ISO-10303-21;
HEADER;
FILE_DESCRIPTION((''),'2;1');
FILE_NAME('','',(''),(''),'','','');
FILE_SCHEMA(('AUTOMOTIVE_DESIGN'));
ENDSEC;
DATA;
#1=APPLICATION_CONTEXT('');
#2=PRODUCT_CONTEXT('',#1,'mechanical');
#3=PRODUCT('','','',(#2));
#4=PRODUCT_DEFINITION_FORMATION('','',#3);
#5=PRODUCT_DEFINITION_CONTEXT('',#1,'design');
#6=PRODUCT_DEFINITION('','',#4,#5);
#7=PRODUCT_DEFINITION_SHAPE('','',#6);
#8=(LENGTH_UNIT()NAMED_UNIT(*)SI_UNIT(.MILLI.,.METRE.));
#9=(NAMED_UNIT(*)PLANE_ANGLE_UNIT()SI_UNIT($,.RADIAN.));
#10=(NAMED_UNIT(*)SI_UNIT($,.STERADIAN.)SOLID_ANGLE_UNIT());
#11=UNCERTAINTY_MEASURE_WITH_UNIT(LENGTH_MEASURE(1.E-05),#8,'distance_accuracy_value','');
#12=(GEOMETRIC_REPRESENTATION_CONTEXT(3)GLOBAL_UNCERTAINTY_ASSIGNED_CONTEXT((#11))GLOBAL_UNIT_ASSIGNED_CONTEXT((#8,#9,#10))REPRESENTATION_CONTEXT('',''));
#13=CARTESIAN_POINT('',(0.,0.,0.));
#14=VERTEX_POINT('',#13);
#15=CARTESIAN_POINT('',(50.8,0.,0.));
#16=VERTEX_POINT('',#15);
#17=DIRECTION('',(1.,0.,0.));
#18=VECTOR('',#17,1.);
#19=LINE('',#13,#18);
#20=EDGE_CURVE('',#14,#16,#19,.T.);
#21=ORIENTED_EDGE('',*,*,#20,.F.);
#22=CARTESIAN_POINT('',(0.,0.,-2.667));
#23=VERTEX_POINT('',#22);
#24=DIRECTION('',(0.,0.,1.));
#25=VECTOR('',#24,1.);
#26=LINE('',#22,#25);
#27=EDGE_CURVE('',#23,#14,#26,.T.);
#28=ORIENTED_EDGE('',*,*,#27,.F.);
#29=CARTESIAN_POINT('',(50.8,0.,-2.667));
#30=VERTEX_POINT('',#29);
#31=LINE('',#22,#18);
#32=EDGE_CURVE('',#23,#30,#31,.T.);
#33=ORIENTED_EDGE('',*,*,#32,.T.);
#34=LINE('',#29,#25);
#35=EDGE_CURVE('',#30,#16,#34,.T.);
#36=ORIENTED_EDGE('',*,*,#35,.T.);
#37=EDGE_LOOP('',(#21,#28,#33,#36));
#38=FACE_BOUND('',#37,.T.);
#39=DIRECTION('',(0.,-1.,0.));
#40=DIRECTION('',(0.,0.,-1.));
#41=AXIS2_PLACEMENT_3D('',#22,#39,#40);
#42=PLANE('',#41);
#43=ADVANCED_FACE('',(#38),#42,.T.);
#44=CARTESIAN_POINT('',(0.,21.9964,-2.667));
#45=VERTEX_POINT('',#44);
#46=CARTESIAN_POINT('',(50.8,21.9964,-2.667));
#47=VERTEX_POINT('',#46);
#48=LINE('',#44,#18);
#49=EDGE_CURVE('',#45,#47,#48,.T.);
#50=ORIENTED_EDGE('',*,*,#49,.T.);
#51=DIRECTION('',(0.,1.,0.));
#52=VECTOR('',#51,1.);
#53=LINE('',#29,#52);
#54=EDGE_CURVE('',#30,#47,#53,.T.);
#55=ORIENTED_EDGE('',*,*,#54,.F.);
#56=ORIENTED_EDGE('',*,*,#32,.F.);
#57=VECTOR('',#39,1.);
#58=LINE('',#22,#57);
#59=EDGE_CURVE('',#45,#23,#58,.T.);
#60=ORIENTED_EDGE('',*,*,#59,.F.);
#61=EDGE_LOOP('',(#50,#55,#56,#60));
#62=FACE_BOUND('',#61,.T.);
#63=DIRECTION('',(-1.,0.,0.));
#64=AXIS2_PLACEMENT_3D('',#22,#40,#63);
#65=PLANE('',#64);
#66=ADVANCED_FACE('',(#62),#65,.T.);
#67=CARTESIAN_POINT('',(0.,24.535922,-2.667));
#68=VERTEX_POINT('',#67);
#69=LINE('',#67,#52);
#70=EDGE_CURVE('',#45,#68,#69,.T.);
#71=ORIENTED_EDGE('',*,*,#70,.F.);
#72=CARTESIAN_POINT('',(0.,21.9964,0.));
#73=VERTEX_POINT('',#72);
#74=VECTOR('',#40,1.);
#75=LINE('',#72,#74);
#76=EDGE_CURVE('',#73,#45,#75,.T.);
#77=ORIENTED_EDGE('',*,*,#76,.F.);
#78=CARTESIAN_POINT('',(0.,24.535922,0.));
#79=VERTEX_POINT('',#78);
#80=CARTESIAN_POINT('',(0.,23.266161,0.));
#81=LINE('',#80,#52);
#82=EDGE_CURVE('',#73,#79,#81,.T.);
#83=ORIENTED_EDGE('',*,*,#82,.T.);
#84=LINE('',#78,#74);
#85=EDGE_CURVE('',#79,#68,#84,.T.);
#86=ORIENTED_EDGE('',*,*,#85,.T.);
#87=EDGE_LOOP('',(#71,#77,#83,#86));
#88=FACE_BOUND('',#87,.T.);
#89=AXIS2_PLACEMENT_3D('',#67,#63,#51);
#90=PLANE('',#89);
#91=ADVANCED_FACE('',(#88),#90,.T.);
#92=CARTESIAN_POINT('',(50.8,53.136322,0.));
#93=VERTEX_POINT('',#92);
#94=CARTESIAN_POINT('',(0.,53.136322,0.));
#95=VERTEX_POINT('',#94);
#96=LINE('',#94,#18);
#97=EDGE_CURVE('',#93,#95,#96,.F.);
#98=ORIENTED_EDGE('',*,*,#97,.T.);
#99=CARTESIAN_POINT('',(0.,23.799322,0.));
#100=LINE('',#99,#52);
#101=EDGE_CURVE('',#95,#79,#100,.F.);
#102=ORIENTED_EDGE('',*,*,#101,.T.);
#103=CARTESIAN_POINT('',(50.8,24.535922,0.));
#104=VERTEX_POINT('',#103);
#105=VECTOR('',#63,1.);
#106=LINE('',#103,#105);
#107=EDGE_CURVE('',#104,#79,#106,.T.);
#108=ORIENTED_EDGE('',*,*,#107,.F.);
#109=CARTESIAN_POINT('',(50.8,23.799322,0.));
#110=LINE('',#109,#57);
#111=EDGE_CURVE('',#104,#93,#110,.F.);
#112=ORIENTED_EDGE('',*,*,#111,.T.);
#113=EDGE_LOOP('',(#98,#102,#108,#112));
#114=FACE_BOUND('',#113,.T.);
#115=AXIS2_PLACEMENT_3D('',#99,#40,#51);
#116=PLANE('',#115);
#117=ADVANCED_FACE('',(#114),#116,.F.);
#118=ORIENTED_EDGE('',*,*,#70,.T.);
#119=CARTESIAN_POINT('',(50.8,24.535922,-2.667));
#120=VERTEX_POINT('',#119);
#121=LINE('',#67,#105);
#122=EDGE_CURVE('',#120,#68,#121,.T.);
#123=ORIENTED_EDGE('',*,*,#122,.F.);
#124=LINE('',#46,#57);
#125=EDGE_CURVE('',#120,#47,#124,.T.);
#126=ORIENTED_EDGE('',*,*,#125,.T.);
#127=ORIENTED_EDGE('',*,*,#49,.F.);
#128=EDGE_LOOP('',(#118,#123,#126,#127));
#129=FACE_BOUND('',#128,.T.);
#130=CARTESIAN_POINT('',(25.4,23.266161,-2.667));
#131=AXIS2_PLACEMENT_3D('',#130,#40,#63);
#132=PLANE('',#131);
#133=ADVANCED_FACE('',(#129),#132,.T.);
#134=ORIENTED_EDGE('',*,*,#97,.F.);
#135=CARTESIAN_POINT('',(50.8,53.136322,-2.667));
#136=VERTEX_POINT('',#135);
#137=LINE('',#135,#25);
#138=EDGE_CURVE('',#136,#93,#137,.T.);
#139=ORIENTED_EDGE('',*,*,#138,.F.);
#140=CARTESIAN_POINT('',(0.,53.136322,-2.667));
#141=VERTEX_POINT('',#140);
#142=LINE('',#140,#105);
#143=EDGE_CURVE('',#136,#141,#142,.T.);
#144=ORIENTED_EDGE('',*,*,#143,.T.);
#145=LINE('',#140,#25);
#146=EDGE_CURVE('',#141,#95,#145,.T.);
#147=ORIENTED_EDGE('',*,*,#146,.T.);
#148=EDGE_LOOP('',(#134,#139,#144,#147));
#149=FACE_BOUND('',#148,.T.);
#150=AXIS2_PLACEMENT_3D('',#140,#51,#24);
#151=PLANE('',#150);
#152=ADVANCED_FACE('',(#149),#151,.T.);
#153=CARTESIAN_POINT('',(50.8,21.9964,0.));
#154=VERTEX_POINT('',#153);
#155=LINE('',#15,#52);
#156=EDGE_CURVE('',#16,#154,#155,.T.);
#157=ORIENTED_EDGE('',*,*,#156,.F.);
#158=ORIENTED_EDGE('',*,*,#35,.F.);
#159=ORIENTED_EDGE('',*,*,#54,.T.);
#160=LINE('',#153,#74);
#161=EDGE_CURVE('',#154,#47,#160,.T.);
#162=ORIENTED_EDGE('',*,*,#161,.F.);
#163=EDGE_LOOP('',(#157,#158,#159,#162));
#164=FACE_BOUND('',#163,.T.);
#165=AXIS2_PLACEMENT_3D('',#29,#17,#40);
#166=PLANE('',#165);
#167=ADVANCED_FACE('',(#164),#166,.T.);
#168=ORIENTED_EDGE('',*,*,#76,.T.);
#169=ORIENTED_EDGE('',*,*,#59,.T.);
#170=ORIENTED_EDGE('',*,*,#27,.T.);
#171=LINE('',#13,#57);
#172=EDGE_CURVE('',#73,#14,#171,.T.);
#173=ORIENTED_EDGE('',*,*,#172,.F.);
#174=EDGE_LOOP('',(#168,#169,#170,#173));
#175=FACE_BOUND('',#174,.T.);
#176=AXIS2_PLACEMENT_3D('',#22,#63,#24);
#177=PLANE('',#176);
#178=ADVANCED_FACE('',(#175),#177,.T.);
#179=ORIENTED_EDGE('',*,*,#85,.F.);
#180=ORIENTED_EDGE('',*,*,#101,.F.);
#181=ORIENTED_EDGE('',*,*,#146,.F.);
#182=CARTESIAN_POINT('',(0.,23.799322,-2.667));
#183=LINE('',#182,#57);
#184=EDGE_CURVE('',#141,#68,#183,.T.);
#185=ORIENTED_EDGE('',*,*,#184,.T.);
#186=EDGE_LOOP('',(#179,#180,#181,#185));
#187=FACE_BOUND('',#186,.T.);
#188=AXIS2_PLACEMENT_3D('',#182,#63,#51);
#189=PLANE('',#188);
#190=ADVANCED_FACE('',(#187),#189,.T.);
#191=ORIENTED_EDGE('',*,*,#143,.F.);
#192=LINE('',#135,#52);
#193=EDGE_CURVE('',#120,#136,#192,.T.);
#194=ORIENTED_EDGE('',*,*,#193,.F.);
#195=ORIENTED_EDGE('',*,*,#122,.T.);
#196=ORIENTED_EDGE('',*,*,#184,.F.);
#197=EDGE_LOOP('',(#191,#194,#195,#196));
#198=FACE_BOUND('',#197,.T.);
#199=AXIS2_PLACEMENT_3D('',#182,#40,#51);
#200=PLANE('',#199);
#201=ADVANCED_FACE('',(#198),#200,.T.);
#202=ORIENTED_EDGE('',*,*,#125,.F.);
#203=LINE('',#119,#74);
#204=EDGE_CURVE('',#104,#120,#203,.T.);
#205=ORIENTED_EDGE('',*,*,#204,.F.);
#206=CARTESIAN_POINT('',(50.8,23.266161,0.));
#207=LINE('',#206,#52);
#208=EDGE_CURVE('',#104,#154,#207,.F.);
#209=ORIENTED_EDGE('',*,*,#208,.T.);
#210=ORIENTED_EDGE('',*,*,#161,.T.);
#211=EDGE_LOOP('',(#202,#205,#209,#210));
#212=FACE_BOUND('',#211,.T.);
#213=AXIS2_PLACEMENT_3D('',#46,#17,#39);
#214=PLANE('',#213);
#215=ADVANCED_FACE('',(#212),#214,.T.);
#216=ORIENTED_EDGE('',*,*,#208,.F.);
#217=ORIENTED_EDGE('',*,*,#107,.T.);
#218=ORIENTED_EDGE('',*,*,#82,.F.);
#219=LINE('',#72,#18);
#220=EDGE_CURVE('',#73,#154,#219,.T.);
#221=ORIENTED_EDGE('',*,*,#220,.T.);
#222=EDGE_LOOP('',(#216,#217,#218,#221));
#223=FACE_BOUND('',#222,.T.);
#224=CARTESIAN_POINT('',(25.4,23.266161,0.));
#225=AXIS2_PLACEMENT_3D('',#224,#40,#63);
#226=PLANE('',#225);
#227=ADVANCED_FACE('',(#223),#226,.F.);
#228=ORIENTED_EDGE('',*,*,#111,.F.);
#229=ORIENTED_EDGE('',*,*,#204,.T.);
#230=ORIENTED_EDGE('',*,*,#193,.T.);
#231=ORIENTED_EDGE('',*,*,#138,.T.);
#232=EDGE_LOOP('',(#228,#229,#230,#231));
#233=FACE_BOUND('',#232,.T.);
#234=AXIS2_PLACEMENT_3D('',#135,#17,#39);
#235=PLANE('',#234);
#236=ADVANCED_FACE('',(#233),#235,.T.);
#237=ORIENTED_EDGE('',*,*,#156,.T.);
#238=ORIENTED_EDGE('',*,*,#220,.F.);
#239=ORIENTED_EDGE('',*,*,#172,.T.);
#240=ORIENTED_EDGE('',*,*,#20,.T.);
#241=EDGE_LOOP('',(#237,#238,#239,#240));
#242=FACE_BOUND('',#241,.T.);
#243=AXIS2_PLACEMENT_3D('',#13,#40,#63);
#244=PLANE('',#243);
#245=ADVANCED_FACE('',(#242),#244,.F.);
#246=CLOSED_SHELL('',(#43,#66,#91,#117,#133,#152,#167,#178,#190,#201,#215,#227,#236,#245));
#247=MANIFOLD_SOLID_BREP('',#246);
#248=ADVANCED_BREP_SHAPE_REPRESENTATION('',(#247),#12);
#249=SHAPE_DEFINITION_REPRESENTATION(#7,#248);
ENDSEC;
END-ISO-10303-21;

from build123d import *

# Parameters (mm, degrees)
SKETCH1_W                    = 50.8
SKETCH1_H                    = 25.4
BASE_FLANGE1_DEPTH           = 2.667
EDGE_FLANGE1_STRIP_W         = 12.1412
EDGE_FLANGE1_STRIP_H         = 2.667
EDGE_FLANGE1_STRIP_CUT_DEPTH = 50.8
EDGE_FLANGE1_DEPTH           = 50.8
UNFOLD1_DEPTH                = 50.8
UNFOLD1_2_DEPTH              = 50.8


# Read off the part's stored shape, not the designer's step: Unfold1
# Sheet-metal steps are written as plain solids
with BuildPart() as part:
    # Sketch1 → Base-Flange1 (new body)
    with BuildSketch(Plane.XY):
        with Locations((25.4, 12.7)):
            Rectangle(SKETCH1_W, SKETCH1_H)
    extrude(amount=-BASE_FLANGE1_DEPTH)

    # Edge-Flange1 strip (across the edge) → Edge-Flange1 strip cut (cut)
    with BuildSketch(Plane(origin=(50.8, 25.4, 0), x_dir=(0, -1, 0), z_dir=(-1, 0, 0))):
        with Locations((-2.667, -1.3335)):
            Rectangle(EDGE_FLANGE1_STRIP_W, EDGE_FLANGE1_STRIP_H)
    extrude(amount=EDGE_FLANGE1_STRIP_CUT_DEPTH, mode=Mode.SUBTRACT)

    # Edge-Flange1 section (across the edge) → Edge-Flange1 (add)
    with BuildSketch(Plane(origin=(50.8, 25.4, 0), x_dir=(0, -1, 0), z_dir=(-1, 0, 0))):
        with BuildLine():
            Line((0, 0.7366), (0, 29.337))
            Line((0, 29.337), (2.667, 29.337))
            Line((2.667, 29.337), (2.667, 0.7366))
            ThreePointArc((2.667, 0.7366), (2.882745145, 0.215745145), (3.4036, 0))
            Line((3.4036, 0), (3.4036, -2.667))
            ThreePointArc((3.4036, -2.667), (0.99689136, -1.67010864), (0, 0.7366))
        make_face()
    extrude(amount=EDGE_FLANGE1_DEPTH)

    # Unfold1 outline → Unfold1 (cut)
    with BuildSketch(Plane.YZ):
        with BuildLine():
            Line((21.9964, 0), (25.319337465, 0))
            ThreePointArc((25.319337465, 0), (25.379774271, 0.366098312), (25.4, 0.7366))
            Line((25.4, 0.7366), (25.4, 29.337))
            Line((25.4, 29.337), (22.733, 29.337))
            Line((22.733, 29.337), (22.733, 0.7366))
            ThreePointArc((22.733, 0.7366), (22.517254855, 0.215745145), (21.9964, 0))
        make_face()
    extrude(amount=UNFOLD1_DEPTH, mode=Mode.SUBTRACT)

    # Unfold1 2 outline → Unfold1 2 (add)
    with BuildSketch(Plane.YZ):
        with BuildLine():
            Line((21.9964, -2.667), (53.136322129, -2.667))
            Line((53.136322129, -2.667), (53.136322129, 0))
            Line((53.136322129, 0), (25.319337465, 0))
            ThreePointArc((25.319337465, 0), (24.126822634, -1.917791146), (21.9964, -2.667))
        make_face()
    extrude(amount=UNFOLD1_2_DEPTH)


solid = part.part
